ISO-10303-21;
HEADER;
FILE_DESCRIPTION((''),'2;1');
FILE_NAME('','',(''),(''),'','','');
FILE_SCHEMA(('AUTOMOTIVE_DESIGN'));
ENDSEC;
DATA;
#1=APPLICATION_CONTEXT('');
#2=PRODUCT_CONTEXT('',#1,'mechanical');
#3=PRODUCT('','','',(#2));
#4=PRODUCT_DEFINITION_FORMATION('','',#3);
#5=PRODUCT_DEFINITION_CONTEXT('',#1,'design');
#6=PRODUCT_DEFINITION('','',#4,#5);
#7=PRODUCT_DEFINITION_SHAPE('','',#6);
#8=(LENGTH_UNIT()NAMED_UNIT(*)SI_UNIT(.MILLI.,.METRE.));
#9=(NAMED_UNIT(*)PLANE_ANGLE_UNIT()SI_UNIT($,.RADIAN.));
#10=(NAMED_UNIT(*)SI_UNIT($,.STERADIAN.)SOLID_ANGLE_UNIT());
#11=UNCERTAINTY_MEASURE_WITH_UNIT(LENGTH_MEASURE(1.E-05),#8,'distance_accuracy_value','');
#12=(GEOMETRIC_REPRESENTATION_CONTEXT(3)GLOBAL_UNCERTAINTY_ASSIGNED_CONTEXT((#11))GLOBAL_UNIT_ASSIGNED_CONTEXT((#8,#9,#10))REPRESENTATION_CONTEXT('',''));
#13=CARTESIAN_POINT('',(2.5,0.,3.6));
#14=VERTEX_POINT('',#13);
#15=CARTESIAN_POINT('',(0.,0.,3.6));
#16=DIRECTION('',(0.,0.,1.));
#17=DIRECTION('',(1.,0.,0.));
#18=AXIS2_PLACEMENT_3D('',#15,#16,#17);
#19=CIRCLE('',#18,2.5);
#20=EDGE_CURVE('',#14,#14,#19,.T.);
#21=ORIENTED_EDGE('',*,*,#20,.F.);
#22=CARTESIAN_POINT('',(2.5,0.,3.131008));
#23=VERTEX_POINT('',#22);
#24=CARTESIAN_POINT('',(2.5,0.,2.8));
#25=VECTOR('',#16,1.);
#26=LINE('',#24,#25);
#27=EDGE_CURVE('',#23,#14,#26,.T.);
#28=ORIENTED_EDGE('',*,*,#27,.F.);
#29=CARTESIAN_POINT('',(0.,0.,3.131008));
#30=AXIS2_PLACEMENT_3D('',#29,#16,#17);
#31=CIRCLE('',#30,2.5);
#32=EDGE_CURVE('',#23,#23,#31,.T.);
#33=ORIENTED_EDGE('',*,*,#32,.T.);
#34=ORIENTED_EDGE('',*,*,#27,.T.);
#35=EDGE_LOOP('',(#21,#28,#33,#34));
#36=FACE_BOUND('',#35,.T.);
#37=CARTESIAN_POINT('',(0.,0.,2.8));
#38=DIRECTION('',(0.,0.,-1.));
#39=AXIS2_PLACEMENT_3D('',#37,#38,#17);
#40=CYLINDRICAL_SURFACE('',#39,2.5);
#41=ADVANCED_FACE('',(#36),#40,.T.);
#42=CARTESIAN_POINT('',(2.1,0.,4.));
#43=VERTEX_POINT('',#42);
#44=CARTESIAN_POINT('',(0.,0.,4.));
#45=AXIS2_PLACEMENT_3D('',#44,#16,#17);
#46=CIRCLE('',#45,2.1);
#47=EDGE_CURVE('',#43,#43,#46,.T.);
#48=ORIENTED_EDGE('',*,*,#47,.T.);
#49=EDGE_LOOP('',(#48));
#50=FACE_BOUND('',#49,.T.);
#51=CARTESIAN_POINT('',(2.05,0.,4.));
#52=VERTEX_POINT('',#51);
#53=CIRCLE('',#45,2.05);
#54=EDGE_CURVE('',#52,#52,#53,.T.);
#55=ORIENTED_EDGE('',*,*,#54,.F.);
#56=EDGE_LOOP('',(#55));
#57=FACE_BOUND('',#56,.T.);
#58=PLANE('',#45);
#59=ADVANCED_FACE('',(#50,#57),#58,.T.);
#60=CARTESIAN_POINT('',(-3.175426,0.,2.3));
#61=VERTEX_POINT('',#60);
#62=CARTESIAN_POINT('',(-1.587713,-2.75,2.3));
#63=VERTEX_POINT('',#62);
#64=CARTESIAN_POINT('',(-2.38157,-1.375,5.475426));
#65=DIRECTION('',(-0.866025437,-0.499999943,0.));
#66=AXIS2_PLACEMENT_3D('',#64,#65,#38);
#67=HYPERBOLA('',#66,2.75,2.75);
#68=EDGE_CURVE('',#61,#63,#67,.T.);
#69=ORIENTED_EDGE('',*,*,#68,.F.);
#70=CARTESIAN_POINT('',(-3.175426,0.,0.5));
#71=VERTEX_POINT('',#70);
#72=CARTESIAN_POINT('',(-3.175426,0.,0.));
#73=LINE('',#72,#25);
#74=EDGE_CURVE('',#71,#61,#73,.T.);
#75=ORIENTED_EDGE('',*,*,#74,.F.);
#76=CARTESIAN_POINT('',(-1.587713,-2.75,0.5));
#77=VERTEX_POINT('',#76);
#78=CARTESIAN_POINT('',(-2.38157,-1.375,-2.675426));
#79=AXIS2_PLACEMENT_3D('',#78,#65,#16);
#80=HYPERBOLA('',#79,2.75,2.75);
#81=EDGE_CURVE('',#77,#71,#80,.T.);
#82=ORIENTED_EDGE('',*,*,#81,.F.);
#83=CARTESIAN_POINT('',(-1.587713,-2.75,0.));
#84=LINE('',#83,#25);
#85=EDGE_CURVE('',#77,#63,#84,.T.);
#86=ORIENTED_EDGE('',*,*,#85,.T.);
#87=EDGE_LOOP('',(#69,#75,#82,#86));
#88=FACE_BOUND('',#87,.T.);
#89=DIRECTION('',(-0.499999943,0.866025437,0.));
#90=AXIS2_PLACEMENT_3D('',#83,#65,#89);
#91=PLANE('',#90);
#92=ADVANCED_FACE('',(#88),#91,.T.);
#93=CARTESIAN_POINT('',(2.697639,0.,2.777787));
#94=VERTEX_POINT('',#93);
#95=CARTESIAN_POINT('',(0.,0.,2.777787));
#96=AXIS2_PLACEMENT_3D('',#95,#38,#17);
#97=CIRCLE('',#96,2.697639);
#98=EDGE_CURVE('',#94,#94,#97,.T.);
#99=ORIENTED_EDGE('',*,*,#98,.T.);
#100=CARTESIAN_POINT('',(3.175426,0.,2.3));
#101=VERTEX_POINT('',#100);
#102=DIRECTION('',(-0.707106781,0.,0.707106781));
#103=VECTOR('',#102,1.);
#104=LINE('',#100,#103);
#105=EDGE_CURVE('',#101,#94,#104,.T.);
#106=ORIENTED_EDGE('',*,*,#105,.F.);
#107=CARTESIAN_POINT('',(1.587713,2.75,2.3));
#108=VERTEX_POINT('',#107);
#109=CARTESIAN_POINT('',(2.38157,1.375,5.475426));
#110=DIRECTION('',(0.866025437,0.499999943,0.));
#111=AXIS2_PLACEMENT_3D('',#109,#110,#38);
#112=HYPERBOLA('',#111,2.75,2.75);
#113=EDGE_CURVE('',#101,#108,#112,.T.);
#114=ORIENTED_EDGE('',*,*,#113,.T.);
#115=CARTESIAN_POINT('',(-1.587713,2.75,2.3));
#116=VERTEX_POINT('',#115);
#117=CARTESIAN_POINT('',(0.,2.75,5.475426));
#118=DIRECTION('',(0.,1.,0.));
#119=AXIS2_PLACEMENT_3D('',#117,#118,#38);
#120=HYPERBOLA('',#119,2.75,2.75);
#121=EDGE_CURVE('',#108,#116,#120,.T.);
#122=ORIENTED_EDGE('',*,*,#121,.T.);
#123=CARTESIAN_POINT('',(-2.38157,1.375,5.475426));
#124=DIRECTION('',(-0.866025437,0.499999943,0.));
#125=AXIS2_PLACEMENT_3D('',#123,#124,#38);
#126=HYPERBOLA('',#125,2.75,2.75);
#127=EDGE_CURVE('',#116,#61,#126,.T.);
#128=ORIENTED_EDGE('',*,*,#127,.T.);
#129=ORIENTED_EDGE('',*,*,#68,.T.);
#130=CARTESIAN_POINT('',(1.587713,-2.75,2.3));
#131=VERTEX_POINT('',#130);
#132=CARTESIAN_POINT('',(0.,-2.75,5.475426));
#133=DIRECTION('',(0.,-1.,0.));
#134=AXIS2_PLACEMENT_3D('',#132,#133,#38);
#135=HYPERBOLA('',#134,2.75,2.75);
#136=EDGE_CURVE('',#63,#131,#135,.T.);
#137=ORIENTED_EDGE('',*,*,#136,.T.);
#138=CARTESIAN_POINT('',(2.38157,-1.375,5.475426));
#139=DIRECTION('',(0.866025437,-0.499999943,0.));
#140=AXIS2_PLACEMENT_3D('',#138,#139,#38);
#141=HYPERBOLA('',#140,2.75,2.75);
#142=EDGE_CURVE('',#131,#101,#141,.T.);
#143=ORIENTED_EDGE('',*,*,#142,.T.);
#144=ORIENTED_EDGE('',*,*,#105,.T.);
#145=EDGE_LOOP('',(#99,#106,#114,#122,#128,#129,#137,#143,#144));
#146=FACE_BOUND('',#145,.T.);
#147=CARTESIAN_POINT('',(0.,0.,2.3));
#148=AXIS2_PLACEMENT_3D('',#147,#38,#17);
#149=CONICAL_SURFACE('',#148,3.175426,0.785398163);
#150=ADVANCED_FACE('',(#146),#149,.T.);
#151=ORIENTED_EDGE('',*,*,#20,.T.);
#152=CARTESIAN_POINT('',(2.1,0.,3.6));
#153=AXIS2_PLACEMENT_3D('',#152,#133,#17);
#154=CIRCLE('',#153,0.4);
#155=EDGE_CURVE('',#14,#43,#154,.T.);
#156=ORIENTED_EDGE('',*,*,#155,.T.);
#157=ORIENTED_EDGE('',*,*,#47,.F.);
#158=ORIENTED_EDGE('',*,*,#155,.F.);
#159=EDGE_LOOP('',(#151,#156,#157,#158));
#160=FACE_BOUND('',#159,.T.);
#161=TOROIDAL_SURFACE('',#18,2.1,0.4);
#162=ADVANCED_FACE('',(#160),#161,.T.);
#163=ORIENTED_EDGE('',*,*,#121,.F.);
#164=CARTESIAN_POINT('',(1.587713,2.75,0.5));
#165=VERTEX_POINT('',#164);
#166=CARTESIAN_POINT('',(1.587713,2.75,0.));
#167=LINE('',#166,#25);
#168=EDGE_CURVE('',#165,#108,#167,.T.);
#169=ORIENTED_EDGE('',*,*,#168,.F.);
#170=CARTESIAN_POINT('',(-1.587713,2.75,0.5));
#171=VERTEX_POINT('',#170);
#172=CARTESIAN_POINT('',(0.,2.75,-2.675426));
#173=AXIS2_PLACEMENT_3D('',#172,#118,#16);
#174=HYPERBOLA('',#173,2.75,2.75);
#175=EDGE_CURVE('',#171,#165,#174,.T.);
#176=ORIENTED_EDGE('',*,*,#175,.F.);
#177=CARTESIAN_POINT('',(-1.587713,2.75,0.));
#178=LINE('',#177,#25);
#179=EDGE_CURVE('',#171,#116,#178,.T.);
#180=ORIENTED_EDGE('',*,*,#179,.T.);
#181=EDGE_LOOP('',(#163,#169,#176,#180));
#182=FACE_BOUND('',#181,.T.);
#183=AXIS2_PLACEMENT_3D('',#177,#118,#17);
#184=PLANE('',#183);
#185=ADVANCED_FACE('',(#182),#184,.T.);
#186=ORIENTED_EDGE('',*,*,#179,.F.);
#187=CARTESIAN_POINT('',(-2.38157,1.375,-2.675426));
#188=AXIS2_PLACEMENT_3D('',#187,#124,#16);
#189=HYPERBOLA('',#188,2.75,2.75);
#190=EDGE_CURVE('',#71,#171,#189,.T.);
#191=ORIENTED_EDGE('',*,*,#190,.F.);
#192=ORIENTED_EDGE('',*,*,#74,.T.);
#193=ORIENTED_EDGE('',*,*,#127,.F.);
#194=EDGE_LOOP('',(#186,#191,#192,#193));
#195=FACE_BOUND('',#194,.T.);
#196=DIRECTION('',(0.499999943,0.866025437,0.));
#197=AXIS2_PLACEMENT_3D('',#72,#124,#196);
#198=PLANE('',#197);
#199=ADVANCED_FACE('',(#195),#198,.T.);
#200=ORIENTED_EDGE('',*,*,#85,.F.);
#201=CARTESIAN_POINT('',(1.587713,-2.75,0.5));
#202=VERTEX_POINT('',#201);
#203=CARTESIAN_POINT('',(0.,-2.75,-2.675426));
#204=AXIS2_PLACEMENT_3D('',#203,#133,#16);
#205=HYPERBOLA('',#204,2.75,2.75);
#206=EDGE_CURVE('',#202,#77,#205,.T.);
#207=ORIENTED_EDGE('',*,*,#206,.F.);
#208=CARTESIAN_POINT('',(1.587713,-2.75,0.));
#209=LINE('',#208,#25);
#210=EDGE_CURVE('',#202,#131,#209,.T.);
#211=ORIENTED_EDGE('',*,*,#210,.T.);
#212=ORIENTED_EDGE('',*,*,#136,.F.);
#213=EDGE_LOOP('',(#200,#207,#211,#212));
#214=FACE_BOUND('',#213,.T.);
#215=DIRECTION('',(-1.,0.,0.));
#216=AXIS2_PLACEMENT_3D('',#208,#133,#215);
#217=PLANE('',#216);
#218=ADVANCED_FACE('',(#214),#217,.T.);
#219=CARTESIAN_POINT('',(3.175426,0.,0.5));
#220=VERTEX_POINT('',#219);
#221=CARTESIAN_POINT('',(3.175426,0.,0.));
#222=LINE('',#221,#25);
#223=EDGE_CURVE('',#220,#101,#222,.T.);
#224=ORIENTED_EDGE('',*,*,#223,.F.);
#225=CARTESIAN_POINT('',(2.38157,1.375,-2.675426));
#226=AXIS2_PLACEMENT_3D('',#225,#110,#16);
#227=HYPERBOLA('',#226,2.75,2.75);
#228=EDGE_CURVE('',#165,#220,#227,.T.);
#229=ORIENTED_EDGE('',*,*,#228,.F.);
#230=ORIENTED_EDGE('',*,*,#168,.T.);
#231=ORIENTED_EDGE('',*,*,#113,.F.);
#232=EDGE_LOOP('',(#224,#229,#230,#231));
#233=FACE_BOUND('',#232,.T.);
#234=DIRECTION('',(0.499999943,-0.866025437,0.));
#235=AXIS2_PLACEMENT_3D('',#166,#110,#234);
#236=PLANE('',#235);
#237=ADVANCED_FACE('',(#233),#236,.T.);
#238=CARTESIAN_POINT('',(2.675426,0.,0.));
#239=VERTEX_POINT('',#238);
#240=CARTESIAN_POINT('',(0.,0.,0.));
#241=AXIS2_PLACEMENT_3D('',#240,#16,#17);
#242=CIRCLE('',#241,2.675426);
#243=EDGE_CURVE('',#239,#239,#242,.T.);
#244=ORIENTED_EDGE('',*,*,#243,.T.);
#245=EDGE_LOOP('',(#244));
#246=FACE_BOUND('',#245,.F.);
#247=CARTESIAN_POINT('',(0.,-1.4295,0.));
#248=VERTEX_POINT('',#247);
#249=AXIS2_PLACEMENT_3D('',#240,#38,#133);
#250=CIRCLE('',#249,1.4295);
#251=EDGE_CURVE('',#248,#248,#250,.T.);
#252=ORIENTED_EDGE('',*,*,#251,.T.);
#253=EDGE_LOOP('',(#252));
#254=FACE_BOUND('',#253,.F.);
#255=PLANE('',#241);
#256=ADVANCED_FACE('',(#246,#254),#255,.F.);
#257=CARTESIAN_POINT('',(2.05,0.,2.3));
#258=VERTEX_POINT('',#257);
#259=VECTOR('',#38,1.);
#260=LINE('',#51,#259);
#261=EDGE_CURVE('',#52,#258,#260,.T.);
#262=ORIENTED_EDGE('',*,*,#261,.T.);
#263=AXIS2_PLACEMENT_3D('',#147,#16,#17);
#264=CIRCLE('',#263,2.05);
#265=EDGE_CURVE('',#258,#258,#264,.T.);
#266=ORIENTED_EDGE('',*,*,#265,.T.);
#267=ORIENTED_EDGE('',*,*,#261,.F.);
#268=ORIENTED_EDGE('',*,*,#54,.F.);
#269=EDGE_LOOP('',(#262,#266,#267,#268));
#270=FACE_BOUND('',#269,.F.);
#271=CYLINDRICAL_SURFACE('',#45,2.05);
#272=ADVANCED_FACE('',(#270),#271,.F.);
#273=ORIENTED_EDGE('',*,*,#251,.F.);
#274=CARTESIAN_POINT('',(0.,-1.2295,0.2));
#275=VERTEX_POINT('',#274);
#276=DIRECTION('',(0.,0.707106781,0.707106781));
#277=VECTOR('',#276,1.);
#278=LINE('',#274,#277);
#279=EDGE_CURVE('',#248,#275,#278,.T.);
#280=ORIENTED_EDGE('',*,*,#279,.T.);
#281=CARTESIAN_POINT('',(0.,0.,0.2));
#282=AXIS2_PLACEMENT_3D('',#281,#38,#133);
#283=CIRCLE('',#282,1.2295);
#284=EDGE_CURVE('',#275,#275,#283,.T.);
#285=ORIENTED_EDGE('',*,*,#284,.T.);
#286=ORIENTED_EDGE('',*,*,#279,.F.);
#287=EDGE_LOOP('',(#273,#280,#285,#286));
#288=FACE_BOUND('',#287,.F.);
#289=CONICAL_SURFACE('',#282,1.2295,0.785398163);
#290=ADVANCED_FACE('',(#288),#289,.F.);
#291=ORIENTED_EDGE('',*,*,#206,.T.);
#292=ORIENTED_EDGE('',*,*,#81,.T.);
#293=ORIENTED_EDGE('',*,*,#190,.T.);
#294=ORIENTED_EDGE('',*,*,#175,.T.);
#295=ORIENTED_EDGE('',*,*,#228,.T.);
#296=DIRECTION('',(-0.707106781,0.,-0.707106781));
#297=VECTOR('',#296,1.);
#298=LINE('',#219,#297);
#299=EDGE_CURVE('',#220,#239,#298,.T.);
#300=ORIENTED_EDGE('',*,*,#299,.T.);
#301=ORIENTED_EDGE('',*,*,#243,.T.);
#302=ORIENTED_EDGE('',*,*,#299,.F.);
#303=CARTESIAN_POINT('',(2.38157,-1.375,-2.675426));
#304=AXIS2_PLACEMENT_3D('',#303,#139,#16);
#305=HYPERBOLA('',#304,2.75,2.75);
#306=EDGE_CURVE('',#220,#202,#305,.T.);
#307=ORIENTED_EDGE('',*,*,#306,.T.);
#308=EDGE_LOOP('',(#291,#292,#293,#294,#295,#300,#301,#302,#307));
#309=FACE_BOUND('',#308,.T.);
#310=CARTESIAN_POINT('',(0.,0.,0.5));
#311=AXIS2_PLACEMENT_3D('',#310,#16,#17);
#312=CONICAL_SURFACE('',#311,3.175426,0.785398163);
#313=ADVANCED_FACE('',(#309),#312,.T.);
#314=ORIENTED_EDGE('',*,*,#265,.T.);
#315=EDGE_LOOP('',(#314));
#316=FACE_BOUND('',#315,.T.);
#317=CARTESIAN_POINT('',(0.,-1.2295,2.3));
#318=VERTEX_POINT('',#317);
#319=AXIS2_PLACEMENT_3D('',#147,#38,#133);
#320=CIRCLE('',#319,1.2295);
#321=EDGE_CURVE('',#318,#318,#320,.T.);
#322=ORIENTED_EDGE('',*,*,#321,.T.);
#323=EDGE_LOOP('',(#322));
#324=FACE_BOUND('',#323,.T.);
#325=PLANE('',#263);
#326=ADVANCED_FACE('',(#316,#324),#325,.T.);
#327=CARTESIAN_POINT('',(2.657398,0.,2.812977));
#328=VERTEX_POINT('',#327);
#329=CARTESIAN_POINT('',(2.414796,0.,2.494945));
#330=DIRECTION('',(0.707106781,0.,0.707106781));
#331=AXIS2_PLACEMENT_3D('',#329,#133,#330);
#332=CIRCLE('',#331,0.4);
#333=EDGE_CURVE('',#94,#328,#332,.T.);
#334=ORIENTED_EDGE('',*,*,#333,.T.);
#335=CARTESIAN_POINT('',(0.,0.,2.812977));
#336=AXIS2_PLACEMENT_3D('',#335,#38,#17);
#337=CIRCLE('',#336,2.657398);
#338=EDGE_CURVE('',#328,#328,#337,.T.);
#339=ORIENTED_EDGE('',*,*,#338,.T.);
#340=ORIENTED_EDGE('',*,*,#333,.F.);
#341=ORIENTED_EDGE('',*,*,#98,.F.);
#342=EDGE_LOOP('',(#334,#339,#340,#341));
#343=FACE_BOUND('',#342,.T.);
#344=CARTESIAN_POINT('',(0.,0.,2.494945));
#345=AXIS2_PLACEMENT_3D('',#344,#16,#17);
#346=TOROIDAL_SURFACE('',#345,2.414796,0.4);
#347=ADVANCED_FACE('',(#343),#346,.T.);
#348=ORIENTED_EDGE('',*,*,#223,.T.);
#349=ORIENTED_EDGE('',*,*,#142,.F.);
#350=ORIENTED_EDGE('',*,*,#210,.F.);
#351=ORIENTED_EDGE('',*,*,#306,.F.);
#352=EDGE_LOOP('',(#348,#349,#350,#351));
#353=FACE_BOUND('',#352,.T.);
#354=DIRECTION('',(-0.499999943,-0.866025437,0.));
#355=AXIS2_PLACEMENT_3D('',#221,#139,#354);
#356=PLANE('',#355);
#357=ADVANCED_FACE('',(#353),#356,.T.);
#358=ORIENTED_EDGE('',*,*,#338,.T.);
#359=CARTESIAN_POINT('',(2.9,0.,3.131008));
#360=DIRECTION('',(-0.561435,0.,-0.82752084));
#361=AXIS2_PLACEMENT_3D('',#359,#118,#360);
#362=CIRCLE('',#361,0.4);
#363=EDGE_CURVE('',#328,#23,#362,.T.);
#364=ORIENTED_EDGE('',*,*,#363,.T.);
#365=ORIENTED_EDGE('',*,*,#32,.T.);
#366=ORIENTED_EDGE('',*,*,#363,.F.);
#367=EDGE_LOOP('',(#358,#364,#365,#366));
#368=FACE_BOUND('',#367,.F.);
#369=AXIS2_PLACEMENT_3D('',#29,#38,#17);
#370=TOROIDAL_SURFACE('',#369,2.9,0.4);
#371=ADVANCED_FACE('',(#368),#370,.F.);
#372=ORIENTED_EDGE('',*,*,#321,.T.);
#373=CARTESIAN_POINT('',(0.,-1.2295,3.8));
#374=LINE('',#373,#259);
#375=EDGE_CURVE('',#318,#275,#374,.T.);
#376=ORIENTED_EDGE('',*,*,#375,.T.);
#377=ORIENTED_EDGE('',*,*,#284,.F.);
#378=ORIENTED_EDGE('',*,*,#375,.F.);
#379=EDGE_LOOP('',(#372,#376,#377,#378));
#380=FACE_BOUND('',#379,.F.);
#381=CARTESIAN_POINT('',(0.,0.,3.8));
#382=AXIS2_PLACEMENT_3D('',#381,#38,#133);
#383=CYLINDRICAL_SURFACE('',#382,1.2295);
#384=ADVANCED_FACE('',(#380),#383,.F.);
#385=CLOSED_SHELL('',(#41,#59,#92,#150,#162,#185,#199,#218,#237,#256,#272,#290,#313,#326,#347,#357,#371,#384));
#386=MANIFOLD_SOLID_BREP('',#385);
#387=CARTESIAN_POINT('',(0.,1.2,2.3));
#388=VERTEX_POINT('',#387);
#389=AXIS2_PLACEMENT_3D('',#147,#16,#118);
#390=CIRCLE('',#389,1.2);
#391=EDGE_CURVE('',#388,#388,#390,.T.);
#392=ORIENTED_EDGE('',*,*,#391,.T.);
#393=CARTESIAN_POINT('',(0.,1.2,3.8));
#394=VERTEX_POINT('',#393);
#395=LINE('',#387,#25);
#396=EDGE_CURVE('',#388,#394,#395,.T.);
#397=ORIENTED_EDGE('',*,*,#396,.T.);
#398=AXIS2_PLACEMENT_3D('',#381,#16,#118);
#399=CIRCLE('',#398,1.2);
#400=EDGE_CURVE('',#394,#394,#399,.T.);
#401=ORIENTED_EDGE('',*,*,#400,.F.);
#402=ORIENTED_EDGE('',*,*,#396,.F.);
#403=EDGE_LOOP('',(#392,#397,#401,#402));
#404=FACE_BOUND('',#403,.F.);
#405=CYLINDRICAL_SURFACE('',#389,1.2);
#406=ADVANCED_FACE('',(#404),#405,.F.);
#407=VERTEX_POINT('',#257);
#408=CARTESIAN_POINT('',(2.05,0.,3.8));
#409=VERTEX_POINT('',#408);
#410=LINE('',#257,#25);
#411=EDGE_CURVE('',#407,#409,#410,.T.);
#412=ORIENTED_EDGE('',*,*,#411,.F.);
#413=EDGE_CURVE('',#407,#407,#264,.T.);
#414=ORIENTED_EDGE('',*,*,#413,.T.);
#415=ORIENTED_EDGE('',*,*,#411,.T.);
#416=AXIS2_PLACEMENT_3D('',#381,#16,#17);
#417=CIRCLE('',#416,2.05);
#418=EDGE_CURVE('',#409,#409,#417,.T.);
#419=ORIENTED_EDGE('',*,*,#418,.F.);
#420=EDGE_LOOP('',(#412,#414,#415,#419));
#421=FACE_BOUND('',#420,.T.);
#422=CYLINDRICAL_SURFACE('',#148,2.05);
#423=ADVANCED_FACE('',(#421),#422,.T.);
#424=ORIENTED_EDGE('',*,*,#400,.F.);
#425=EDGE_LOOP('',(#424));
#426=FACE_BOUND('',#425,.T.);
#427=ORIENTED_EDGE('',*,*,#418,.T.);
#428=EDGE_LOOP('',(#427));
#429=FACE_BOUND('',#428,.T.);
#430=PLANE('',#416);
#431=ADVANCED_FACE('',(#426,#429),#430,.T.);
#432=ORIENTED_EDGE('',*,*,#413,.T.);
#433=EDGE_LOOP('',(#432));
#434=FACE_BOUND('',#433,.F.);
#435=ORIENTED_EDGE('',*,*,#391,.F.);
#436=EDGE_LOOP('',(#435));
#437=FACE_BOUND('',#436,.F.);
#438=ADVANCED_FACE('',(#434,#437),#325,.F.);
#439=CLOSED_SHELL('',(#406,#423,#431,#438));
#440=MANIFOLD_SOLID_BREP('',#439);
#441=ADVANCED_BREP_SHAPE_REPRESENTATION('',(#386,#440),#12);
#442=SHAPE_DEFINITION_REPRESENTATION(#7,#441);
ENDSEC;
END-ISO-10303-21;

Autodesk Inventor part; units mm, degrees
ref_plane "YZ Plane" through (0, 0, 0) normal (1, 0, 0) x (0, 1, 0)
ref_plane "XZ Plane" through (0, 0, 0) normal (0, 1, 0) x (-1, 0, 0)
ref_plane "XY Plane" through (0, 0, 0) normal (0, 0, 1) x (1, 0, 0)
sketch "Sketch1" plane through (0, 0, 0) normal (0, 0, 1) x (1, 0, 0)
  circle A0 centre (0, 0) radius 3.175426
  line L0 (-1.587713, 2.75) -> (1.587713, 2.75)
  line L1 (1.587713, 2.75) -> (3.175426, 0)
  line L2 (3.175426, 0) -> (1.587713, -2.75)
  line L3 (1.587713, -2.75) -> (-1.587713, -2.75)
  line L4 (-1.587713, -2.75) -> (-3.175426, 0)
  line L5 (-3.175426, 0) -> (-1.587713, 2.75)
  point P0 (-3.175426, 0)
  point P1 (-3.175426, 0)
  point P2 (-1.587713, 2.75)
  point P3 (-1.587713, 2.75)
  point P4 (-1.587713, -2.75)
  point P5 (-1.587713, -2.75)
  point P6 (3.175426, 0)
  point P7 (3.175426, 0)
  point P8 (1.587713, -2.75)
  dimension "d0" = 5.5
extrude "Extrusion1" add sketch "Sketch1" along normal blind 2.8
chamfer "Chamfer1" distance 0.5 angle 45 2 edges at (-3.1754, 0, 0) (-3.1754, 0, 2.8)
extrude "Extrusion2" cut sketch "Sketch1" along normal through all contours L1 A0 | A0 L2 | L0 A0 | A0 L3 | L5 A0 | A0 L4
sketch "Sketch2" plane through (0, 0, 2.8) normal (0, 0, 1) x (1, 0, 0)
  circle A0 centre (0, 0) radius 2.675426
  circle A1 centre (0, 0) radius 2.5
  dimension "d9" = 5
extrude "Extrusion3" add sketch "Sketch2" along normal blind 1.2 contours A1
fillet "Fillet1" radius 0.4 3 edges at (-2.5, 0, 2.8) (-2.6754, 0, 2.8) (-2.5, 0, 4)
sketch "Sketch3" plane through (0, 0, 4) normal (0, 0, 1) x (1, 0, 0)
  circle A0 centre (0, 0) radius 2.05
  dimension "d13" = 4.1
extrude "Extrusion4" cut sketch "Sketch3" against normal blind 1.7
sketch "Sketch4" plane through (0, 0, 2.3) normal (0, 0, 1) x (1, 0, 0)
  circle A0 centre (0, 0) radius 2.05 projected
extrude "Extrusion5" add sketch "Sketch4" along normal blind 1.5 separate body
sketch "Sketch5" plane through (0, 0, 3.8) normal (0, 0, 1) x (1, 0, 0)
  circle A0 centre (0, 0) radius 2.05 projected
hole "Hole1" at (0, 0, 3.8) direction (0, 0, -1) diameter 2.459 end through all bodies 1 thread size "M3x0.5" class "6H" standard "ANSI Metric M Profile"
sketch "Sketch6" plane through (0, 0, 2.3) normal (0, 0, -1) x (-1, 0, 0)
  circle A0 centre (0, 0) radius 1.2295 projected
hole "Hole2" at (0, 0, 2.3) direction (0, 0, 1) diameter 2.4 end through all bodies 2
chamfer "Chamfer2" distance 0.2 angle 45 1 edges at (0, 1.2295, 0)
properties part number "M3 LOCKNUT" material "Stainless Steel"
